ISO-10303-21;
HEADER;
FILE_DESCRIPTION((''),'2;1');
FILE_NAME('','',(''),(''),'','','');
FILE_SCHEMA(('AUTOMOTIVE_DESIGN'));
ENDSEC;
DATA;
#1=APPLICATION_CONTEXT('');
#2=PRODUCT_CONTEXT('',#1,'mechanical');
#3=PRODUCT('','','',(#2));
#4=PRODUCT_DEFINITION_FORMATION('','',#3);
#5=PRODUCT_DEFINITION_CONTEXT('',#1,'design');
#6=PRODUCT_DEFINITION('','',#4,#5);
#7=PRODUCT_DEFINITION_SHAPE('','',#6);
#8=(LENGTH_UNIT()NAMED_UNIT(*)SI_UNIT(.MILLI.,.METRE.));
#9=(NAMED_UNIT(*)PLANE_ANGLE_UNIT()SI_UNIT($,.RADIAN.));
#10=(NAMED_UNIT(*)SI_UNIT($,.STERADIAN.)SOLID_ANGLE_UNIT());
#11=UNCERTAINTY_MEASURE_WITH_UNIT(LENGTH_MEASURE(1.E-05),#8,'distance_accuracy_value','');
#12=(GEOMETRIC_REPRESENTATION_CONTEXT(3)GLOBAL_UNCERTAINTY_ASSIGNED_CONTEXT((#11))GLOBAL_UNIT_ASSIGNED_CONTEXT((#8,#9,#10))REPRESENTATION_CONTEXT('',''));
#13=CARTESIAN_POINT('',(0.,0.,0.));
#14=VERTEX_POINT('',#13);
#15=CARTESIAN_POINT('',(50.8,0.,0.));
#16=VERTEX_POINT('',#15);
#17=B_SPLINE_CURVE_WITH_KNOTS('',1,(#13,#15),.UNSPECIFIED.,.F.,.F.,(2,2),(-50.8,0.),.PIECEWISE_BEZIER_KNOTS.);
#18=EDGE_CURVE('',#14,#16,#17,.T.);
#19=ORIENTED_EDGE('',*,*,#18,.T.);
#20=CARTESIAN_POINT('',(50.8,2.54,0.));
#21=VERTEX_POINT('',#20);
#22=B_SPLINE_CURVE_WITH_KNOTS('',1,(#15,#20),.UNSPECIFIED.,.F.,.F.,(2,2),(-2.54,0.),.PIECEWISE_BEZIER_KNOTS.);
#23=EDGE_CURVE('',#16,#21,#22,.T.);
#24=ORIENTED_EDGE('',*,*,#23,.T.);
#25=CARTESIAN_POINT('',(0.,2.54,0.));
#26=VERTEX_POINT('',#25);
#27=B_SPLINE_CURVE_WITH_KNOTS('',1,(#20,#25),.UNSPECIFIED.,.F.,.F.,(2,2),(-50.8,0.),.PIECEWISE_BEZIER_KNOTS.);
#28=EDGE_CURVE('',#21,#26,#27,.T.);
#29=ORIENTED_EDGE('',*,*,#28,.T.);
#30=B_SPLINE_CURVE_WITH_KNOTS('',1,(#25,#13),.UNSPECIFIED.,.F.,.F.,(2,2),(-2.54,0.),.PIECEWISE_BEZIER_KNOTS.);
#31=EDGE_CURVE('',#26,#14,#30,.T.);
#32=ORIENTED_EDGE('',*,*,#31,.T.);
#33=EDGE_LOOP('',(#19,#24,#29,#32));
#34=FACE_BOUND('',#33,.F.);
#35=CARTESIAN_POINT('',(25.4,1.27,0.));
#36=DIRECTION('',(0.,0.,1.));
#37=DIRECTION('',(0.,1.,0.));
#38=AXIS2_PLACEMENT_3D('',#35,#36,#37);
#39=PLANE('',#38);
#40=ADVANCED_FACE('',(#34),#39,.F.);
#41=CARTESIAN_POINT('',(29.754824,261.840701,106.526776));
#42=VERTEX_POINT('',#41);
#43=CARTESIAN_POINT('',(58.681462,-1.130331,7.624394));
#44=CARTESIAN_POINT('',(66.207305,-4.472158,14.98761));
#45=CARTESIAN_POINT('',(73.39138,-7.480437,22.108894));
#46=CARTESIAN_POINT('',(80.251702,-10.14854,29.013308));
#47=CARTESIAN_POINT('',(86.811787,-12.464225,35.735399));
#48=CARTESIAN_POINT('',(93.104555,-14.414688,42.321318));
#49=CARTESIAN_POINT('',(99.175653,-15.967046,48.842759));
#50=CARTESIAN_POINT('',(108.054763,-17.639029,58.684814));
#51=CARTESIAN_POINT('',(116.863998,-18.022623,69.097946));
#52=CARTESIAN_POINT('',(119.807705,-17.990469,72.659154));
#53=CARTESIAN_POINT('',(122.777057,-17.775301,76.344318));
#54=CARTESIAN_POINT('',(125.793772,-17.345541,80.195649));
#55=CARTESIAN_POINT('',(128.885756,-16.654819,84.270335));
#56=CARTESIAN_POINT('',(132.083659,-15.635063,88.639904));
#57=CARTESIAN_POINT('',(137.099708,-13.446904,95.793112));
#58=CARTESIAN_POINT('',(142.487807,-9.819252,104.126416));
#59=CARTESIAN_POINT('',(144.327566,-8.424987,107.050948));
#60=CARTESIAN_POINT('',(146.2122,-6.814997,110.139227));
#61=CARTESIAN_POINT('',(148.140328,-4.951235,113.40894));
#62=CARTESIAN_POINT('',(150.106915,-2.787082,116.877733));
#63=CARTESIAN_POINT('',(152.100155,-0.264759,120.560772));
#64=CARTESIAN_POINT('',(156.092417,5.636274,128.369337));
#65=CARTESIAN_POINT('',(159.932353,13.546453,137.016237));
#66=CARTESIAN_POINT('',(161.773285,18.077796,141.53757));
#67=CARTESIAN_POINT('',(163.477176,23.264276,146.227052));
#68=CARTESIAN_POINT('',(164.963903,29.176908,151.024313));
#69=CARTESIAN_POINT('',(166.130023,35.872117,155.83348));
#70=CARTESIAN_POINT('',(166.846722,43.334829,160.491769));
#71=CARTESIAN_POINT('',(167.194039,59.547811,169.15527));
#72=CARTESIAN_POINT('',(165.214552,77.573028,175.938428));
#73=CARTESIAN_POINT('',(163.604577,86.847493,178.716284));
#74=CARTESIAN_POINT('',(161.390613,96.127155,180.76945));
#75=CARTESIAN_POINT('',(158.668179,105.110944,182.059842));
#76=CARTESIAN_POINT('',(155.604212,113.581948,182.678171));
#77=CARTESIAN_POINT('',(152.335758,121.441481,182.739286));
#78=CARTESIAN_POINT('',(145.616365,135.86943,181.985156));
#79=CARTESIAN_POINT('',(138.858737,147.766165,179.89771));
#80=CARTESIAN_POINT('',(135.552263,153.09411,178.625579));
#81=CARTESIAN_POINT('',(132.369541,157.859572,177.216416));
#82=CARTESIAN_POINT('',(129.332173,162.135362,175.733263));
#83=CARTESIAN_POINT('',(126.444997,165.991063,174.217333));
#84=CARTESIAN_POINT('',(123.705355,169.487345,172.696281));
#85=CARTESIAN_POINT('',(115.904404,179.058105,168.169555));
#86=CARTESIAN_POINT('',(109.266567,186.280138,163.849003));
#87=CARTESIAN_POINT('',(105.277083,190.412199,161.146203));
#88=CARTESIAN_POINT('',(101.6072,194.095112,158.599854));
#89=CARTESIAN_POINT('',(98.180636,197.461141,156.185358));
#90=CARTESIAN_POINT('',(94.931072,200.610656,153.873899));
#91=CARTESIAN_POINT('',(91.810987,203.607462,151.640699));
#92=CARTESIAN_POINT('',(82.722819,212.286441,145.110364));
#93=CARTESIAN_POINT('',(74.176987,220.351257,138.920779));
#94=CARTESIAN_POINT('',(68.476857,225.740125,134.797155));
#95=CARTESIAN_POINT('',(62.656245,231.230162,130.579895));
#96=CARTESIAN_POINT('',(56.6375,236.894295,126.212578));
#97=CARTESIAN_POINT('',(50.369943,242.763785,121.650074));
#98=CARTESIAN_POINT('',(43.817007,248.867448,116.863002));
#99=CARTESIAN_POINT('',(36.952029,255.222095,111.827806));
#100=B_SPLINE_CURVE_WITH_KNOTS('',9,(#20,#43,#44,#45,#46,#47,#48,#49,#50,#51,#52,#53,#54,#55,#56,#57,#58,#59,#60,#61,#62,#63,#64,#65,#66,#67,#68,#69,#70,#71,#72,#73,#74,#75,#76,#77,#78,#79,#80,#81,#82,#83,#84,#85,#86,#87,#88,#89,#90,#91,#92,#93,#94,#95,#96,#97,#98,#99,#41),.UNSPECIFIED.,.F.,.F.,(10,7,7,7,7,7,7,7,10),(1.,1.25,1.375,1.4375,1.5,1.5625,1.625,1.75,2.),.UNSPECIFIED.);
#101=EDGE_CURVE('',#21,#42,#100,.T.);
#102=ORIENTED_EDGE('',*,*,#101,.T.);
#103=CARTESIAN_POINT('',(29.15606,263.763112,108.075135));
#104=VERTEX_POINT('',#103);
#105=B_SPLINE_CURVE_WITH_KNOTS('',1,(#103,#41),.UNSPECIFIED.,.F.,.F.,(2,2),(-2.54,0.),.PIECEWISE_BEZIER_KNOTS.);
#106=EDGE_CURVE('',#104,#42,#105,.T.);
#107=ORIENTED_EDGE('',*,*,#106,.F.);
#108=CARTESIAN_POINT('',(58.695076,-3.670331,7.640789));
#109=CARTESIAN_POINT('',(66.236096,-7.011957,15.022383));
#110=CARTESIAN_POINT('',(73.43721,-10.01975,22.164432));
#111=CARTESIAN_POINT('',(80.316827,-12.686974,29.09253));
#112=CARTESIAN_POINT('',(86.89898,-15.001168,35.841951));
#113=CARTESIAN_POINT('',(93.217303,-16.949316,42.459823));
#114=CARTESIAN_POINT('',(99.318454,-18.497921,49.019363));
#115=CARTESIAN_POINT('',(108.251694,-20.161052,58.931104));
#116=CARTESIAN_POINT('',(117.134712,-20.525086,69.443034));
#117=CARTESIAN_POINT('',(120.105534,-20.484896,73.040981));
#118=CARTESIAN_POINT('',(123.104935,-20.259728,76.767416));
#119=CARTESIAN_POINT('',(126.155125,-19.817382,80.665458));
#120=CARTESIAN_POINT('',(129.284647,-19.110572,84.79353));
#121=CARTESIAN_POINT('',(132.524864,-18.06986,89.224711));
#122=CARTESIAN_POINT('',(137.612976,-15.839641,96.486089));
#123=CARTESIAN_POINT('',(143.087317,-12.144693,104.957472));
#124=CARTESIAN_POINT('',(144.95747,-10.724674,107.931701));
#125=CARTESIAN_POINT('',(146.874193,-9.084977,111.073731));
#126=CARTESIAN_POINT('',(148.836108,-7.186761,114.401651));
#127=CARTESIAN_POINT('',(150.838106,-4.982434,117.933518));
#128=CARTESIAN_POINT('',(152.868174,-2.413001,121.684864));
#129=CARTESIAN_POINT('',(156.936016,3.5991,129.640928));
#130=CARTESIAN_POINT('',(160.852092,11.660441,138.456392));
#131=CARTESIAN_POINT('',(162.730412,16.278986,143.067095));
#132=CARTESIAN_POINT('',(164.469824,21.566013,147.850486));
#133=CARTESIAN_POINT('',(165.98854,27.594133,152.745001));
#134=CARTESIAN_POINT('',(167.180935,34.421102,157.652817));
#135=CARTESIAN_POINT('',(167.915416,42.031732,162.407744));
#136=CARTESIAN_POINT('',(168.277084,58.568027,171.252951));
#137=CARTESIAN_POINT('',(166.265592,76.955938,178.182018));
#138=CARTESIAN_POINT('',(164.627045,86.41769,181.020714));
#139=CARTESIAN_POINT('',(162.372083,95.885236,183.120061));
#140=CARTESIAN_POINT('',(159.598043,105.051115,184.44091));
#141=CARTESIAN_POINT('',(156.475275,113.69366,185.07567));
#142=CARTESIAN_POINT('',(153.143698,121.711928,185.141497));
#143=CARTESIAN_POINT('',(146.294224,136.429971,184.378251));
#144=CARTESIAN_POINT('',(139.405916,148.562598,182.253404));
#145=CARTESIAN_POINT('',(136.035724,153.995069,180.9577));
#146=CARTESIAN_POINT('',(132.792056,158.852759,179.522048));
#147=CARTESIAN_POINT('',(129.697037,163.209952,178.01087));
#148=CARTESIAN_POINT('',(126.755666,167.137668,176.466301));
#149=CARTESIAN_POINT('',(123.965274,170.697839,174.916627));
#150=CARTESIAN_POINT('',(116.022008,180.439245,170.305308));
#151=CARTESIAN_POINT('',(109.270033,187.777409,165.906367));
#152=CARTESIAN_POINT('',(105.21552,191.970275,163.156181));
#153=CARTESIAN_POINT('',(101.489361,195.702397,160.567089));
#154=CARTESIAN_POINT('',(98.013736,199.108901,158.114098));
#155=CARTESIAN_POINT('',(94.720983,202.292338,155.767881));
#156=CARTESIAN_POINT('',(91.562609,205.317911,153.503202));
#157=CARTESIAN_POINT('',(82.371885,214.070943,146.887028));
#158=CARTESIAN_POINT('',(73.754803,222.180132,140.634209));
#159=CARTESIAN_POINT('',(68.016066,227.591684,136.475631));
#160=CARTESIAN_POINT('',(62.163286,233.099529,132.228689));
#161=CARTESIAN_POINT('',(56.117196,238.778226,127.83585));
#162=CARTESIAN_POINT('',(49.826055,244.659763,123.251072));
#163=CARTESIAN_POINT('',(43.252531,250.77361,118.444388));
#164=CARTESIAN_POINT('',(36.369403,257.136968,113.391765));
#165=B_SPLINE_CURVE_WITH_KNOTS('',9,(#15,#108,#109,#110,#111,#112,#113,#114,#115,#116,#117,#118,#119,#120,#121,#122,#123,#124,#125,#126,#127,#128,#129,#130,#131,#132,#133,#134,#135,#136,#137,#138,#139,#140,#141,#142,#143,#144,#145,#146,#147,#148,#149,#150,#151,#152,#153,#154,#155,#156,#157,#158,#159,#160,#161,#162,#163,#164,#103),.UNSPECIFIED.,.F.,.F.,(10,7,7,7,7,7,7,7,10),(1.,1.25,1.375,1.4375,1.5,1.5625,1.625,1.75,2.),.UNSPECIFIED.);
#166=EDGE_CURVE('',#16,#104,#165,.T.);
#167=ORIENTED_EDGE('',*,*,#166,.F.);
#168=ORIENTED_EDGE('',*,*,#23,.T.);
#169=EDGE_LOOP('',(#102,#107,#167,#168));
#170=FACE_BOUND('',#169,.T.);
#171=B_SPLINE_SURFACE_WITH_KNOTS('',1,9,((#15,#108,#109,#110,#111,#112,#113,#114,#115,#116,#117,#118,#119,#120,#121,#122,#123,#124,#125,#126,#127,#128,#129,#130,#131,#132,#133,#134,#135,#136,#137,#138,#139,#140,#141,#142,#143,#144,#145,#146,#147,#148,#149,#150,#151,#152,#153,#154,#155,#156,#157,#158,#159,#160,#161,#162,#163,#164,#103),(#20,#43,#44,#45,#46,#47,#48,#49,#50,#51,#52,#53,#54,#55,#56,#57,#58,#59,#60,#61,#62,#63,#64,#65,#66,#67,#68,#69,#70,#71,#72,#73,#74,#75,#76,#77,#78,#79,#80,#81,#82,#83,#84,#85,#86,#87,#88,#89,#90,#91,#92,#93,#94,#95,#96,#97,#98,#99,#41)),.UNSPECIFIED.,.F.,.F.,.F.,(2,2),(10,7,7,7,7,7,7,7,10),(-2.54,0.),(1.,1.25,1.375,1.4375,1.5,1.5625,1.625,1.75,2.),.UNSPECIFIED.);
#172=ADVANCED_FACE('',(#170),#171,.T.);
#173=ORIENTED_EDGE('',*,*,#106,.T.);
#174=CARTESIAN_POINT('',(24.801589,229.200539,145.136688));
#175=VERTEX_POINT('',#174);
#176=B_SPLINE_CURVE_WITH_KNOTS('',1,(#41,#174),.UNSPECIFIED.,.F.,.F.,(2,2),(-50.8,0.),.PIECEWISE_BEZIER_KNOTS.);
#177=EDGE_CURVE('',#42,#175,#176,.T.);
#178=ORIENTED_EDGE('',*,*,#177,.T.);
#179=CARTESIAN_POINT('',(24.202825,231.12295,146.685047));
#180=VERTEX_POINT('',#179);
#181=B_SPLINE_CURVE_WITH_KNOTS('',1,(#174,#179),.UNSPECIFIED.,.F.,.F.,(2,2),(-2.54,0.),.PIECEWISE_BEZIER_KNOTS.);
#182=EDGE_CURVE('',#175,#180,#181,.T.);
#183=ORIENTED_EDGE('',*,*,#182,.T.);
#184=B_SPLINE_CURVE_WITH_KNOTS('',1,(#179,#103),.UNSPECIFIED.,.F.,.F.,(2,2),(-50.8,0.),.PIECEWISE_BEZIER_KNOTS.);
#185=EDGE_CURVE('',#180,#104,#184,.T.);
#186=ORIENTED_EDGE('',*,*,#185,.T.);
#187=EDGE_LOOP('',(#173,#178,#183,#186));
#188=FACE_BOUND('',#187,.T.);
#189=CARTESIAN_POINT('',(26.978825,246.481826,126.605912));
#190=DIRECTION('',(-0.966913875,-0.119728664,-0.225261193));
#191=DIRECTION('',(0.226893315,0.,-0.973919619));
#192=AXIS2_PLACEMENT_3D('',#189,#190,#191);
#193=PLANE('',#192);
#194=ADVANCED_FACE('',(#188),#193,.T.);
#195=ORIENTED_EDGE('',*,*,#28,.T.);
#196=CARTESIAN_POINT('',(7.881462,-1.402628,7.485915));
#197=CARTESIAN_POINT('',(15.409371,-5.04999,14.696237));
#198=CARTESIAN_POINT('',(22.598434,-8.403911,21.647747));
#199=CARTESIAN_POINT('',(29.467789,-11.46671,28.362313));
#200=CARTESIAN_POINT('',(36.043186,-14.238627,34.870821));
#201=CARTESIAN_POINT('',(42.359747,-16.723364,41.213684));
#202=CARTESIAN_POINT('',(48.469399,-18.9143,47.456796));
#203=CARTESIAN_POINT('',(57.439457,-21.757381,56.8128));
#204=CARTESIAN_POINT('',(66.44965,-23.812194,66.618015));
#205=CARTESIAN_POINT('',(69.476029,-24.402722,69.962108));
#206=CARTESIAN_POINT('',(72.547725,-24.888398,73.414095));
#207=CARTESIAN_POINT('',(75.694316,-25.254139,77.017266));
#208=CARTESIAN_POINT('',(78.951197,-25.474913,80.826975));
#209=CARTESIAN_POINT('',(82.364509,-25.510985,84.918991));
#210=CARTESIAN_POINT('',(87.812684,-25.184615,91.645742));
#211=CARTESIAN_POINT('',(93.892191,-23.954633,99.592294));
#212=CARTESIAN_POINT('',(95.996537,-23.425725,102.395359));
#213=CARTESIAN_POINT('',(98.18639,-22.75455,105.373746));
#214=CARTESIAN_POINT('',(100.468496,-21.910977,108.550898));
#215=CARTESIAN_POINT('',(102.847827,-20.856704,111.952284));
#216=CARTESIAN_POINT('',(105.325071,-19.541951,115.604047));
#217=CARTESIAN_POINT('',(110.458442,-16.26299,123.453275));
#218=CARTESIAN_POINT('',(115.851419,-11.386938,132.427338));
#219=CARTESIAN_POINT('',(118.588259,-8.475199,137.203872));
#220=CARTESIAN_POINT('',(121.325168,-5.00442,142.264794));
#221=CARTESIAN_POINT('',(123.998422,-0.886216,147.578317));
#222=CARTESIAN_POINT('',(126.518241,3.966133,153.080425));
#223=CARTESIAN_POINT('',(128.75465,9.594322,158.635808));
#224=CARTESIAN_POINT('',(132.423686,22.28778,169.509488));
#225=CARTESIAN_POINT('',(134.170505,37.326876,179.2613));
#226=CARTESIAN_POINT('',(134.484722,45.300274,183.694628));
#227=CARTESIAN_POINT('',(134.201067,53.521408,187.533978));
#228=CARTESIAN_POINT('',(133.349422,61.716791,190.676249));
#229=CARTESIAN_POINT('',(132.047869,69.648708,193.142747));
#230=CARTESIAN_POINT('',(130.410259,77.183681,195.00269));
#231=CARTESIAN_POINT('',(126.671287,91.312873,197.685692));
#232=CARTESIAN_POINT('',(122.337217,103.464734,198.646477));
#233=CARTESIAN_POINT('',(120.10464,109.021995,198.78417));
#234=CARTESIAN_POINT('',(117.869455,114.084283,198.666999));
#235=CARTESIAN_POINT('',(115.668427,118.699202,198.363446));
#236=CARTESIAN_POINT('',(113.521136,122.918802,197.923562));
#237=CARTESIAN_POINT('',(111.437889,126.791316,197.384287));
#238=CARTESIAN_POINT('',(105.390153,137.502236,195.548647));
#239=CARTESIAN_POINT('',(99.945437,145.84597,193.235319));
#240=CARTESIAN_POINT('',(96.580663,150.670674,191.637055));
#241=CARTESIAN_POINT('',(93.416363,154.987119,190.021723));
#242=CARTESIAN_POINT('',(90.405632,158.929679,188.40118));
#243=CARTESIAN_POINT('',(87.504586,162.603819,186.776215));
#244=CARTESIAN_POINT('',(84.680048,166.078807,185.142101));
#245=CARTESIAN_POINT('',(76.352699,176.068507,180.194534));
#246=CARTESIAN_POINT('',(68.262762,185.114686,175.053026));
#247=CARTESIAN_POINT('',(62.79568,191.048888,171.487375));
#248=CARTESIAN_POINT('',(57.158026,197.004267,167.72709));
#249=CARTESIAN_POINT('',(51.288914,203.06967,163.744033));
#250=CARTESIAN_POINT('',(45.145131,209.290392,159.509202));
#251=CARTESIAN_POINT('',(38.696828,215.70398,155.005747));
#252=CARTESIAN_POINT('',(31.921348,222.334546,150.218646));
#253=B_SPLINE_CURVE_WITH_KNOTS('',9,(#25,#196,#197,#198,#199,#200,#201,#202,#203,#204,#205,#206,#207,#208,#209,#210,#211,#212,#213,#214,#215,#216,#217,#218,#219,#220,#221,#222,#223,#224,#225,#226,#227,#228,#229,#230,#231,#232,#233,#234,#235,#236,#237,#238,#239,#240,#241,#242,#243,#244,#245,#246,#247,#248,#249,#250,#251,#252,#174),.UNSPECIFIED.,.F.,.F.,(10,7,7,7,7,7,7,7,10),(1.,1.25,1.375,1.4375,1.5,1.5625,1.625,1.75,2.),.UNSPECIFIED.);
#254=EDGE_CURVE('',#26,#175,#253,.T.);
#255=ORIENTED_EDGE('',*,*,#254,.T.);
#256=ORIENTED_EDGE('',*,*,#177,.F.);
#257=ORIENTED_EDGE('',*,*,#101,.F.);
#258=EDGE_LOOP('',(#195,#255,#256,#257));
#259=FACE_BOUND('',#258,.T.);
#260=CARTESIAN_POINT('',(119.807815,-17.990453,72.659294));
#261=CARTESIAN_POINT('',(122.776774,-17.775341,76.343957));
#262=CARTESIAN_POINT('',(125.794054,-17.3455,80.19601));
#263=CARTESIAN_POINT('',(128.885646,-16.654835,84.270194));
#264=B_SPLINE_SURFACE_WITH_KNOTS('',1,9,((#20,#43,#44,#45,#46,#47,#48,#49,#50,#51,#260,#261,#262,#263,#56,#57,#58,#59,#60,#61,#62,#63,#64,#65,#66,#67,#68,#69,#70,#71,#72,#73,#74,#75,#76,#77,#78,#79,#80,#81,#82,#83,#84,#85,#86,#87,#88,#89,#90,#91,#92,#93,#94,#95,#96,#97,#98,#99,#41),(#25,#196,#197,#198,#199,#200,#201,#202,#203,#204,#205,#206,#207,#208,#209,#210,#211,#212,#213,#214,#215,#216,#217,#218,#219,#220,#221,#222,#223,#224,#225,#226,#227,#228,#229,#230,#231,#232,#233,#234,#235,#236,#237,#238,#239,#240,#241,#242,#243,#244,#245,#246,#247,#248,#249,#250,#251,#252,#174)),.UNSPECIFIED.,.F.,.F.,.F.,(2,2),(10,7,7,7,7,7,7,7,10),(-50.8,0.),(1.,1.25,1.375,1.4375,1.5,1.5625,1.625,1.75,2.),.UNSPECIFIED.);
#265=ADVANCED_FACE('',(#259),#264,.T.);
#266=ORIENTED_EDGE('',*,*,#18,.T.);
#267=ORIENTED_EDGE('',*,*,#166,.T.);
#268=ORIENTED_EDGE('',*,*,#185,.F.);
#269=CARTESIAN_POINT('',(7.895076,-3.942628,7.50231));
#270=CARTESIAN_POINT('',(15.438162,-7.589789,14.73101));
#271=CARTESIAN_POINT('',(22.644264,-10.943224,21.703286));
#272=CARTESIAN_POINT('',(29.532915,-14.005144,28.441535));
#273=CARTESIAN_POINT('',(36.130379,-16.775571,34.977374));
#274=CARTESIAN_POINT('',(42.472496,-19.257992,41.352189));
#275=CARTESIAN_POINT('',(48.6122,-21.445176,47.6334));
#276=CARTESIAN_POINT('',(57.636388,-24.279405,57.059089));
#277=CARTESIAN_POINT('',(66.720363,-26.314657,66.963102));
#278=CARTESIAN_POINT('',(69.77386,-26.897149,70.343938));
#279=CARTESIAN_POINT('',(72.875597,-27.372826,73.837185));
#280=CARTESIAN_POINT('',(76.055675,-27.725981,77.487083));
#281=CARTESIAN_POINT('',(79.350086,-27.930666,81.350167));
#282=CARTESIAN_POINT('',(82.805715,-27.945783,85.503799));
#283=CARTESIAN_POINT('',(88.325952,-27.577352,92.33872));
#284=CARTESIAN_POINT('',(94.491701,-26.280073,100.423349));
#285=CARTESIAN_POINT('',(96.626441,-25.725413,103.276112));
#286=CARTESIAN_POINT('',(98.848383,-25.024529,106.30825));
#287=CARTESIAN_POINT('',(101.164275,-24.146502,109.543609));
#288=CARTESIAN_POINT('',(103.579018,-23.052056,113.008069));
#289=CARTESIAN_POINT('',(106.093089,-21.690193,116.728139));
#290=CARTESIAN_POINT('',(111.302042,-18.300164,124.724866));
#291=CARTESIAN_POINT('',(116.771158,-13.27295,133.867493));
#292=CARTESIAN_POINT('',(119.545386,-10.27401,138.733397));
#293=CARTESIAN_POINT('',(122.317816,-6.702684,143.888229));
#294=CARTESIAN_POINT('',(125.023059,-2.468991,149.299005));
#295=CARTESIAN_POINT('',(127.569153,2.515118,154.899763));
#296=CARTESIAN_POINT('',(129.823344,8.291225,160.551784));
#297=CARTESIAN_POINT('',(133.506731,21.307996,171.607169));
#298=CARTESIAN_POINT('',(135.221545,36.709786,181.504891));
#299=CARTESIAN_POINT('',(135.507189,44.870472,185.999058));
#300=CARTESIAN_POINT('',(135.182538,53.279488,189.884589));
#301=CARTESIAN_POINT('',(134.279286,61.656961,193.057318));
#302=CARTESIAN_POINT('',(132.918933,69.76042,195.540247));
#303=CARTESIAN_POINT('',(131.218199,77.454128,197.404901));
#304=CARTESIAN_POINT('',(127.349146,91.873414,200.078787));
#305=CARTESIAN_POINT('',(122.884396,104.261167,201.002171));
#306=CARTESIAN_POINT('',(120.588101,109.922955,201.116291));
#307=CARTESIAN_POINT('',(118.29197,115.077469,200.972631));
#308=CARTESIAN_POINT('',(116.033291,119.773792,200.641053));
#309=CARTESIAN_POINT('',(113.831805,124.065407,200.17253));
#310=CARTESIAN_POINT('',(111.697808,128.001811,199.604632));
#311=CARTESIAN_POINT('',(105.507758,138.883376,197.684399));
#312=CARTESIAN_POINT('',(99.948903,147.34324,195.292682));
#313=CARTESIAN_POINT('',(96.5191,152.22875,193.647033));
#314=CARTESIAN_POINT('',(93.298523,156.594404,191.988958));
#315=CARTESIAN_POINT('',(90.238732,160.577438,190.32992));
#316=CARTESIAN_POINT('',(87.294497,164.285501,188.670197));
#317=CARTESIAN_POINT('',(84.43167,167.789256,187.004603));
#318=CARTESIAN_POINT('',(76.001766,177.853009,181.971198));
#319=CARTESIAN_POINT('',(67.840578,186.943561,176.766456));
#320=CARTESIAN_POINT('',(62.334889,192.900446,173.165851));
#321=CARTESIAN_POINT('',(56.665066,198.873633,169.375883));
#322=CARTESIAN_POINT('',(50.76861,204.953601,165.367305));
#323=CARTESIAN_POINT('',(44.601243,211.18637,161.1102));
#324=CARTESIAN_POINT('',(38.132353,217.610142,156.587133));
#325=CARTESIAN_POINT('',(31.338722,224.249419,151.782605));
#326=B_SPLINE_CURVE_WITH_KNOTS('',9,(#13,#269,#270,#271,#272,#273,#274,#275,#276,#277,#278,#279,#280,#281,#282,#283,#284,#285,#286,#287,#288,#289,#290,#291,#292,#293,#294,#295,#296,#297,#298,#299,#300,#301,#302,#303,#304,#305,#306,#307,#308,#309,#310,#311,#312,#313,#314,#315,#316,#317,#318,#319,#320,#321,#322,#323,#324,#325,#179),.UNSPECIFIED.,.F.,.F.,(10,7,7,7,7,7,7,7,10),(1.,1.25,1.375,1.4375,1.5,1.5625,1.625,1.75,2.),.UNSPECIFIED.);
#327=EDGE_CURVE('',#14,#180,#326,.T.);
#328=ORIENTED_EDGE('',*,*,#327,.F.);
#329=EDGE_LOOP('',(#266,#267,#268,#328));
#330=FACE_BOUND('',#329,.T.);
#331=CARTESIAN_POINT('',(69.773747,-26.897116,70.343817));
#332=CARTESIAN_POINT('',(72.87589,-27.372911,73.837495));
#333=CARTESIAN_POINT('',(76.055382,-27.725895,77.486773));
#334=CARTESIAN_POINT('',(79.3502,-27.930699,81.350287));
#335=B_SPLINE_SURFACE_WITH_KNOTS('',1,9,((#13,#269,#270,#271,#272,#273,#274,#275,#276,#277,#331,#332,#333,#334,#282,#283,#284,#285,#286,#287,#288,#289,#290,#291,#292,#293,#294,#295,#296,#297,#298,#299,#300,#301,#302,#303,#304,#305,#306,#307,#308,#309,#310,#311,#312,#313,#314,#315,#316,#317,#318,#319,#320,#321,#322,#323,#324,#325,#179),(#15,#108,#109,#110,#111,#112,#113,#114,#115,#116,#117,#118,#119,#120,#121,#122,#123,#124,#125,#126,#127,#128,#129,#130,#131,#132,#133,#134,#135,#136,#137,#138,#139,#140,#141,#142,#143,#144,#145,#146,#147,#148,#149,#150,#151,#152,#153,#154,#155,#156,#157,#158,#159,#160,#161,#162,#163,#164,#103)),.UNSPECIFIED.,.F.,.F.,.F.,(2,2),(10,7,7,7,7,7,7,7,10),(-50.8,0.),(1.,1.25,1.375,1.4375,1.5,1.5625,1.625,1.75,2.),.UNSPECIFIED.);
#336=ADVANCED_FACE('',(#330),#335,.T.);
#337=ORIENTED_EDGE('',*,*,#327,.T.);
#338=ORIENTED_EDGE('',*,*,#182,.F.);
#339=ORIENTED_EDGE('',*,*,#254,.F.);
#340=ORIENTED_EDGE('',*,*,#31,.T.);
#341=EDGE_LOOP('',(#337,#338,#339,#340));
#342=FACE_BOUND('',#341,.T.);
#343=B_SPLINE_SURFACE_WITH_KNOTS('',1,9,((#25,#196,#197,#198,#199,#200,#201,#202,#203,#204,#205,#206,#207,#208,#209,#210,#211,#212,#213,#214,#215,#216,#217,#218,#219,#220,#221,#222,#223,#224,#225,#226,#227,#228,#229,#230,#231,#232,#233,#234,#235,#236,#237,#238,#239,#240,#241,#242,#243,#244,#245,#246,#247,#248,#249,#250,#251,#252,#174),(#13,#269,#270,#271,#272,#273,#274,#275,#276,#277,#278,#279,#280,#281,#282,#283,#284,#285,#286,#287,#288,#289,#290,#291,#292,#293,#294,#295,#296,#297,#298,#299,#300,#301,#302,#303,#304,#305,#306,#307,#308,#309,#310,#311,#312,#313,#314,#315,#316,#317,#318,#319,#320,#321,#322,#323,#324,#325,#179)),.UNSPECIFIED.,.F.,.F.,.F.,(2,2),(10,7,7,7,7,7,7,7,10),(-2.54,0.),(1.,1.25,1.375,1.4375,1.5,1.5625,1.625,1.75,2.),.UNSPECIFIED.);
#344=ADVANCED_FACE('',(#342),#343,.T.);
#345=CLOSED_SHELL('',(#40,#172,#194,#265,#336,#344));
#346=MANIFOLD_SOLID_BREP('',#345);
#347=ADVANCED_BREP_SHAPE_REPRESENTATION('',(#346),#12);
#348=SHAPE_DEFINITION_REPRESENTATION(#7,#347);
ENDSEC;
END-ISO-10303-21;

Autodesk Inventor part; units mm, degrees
ref_plane "YZ Plane" through (0, 0, 0) normal (1, 0, 0) x (0, 1, 0)
ref_plane "XZ Plane" through (0, 0, 0) normal (0, 1, 0) x (-1, 0, 0)
ref_plane "XY Plane" through (0, 0, 0) normal (0, 0, 1) x (1, 0, 0)
sketch "Sketch2" plane through (0, 0, 0) normal (0, 0, 1) x (1, 0, 0)
  line L0 (0, 0) -> (0, 2.54)
  line L1 (0, 2.54) -> (50.8, 2.54)
  line L2 (50.8, 2.54) -> (50.8, 0)
  line L3 (50.8, 0) -> (0, 0)
  dimension "d12" = 2.54
  dimension "d13" = 50.8
sketch3d "3D Sketch1"
  spline S0 degree 2 poles (-69.8766, 73.0871, 92.9051) (60.6245, 6.1722, 216.0263) (-55.2126, 119.7859, 134.3128) knots 1 1 1 2 2 2
sweep "Sweep2" add profiles "Sketch2" path "3D Sketch1"
properties part number "firstseatbeltpart"
